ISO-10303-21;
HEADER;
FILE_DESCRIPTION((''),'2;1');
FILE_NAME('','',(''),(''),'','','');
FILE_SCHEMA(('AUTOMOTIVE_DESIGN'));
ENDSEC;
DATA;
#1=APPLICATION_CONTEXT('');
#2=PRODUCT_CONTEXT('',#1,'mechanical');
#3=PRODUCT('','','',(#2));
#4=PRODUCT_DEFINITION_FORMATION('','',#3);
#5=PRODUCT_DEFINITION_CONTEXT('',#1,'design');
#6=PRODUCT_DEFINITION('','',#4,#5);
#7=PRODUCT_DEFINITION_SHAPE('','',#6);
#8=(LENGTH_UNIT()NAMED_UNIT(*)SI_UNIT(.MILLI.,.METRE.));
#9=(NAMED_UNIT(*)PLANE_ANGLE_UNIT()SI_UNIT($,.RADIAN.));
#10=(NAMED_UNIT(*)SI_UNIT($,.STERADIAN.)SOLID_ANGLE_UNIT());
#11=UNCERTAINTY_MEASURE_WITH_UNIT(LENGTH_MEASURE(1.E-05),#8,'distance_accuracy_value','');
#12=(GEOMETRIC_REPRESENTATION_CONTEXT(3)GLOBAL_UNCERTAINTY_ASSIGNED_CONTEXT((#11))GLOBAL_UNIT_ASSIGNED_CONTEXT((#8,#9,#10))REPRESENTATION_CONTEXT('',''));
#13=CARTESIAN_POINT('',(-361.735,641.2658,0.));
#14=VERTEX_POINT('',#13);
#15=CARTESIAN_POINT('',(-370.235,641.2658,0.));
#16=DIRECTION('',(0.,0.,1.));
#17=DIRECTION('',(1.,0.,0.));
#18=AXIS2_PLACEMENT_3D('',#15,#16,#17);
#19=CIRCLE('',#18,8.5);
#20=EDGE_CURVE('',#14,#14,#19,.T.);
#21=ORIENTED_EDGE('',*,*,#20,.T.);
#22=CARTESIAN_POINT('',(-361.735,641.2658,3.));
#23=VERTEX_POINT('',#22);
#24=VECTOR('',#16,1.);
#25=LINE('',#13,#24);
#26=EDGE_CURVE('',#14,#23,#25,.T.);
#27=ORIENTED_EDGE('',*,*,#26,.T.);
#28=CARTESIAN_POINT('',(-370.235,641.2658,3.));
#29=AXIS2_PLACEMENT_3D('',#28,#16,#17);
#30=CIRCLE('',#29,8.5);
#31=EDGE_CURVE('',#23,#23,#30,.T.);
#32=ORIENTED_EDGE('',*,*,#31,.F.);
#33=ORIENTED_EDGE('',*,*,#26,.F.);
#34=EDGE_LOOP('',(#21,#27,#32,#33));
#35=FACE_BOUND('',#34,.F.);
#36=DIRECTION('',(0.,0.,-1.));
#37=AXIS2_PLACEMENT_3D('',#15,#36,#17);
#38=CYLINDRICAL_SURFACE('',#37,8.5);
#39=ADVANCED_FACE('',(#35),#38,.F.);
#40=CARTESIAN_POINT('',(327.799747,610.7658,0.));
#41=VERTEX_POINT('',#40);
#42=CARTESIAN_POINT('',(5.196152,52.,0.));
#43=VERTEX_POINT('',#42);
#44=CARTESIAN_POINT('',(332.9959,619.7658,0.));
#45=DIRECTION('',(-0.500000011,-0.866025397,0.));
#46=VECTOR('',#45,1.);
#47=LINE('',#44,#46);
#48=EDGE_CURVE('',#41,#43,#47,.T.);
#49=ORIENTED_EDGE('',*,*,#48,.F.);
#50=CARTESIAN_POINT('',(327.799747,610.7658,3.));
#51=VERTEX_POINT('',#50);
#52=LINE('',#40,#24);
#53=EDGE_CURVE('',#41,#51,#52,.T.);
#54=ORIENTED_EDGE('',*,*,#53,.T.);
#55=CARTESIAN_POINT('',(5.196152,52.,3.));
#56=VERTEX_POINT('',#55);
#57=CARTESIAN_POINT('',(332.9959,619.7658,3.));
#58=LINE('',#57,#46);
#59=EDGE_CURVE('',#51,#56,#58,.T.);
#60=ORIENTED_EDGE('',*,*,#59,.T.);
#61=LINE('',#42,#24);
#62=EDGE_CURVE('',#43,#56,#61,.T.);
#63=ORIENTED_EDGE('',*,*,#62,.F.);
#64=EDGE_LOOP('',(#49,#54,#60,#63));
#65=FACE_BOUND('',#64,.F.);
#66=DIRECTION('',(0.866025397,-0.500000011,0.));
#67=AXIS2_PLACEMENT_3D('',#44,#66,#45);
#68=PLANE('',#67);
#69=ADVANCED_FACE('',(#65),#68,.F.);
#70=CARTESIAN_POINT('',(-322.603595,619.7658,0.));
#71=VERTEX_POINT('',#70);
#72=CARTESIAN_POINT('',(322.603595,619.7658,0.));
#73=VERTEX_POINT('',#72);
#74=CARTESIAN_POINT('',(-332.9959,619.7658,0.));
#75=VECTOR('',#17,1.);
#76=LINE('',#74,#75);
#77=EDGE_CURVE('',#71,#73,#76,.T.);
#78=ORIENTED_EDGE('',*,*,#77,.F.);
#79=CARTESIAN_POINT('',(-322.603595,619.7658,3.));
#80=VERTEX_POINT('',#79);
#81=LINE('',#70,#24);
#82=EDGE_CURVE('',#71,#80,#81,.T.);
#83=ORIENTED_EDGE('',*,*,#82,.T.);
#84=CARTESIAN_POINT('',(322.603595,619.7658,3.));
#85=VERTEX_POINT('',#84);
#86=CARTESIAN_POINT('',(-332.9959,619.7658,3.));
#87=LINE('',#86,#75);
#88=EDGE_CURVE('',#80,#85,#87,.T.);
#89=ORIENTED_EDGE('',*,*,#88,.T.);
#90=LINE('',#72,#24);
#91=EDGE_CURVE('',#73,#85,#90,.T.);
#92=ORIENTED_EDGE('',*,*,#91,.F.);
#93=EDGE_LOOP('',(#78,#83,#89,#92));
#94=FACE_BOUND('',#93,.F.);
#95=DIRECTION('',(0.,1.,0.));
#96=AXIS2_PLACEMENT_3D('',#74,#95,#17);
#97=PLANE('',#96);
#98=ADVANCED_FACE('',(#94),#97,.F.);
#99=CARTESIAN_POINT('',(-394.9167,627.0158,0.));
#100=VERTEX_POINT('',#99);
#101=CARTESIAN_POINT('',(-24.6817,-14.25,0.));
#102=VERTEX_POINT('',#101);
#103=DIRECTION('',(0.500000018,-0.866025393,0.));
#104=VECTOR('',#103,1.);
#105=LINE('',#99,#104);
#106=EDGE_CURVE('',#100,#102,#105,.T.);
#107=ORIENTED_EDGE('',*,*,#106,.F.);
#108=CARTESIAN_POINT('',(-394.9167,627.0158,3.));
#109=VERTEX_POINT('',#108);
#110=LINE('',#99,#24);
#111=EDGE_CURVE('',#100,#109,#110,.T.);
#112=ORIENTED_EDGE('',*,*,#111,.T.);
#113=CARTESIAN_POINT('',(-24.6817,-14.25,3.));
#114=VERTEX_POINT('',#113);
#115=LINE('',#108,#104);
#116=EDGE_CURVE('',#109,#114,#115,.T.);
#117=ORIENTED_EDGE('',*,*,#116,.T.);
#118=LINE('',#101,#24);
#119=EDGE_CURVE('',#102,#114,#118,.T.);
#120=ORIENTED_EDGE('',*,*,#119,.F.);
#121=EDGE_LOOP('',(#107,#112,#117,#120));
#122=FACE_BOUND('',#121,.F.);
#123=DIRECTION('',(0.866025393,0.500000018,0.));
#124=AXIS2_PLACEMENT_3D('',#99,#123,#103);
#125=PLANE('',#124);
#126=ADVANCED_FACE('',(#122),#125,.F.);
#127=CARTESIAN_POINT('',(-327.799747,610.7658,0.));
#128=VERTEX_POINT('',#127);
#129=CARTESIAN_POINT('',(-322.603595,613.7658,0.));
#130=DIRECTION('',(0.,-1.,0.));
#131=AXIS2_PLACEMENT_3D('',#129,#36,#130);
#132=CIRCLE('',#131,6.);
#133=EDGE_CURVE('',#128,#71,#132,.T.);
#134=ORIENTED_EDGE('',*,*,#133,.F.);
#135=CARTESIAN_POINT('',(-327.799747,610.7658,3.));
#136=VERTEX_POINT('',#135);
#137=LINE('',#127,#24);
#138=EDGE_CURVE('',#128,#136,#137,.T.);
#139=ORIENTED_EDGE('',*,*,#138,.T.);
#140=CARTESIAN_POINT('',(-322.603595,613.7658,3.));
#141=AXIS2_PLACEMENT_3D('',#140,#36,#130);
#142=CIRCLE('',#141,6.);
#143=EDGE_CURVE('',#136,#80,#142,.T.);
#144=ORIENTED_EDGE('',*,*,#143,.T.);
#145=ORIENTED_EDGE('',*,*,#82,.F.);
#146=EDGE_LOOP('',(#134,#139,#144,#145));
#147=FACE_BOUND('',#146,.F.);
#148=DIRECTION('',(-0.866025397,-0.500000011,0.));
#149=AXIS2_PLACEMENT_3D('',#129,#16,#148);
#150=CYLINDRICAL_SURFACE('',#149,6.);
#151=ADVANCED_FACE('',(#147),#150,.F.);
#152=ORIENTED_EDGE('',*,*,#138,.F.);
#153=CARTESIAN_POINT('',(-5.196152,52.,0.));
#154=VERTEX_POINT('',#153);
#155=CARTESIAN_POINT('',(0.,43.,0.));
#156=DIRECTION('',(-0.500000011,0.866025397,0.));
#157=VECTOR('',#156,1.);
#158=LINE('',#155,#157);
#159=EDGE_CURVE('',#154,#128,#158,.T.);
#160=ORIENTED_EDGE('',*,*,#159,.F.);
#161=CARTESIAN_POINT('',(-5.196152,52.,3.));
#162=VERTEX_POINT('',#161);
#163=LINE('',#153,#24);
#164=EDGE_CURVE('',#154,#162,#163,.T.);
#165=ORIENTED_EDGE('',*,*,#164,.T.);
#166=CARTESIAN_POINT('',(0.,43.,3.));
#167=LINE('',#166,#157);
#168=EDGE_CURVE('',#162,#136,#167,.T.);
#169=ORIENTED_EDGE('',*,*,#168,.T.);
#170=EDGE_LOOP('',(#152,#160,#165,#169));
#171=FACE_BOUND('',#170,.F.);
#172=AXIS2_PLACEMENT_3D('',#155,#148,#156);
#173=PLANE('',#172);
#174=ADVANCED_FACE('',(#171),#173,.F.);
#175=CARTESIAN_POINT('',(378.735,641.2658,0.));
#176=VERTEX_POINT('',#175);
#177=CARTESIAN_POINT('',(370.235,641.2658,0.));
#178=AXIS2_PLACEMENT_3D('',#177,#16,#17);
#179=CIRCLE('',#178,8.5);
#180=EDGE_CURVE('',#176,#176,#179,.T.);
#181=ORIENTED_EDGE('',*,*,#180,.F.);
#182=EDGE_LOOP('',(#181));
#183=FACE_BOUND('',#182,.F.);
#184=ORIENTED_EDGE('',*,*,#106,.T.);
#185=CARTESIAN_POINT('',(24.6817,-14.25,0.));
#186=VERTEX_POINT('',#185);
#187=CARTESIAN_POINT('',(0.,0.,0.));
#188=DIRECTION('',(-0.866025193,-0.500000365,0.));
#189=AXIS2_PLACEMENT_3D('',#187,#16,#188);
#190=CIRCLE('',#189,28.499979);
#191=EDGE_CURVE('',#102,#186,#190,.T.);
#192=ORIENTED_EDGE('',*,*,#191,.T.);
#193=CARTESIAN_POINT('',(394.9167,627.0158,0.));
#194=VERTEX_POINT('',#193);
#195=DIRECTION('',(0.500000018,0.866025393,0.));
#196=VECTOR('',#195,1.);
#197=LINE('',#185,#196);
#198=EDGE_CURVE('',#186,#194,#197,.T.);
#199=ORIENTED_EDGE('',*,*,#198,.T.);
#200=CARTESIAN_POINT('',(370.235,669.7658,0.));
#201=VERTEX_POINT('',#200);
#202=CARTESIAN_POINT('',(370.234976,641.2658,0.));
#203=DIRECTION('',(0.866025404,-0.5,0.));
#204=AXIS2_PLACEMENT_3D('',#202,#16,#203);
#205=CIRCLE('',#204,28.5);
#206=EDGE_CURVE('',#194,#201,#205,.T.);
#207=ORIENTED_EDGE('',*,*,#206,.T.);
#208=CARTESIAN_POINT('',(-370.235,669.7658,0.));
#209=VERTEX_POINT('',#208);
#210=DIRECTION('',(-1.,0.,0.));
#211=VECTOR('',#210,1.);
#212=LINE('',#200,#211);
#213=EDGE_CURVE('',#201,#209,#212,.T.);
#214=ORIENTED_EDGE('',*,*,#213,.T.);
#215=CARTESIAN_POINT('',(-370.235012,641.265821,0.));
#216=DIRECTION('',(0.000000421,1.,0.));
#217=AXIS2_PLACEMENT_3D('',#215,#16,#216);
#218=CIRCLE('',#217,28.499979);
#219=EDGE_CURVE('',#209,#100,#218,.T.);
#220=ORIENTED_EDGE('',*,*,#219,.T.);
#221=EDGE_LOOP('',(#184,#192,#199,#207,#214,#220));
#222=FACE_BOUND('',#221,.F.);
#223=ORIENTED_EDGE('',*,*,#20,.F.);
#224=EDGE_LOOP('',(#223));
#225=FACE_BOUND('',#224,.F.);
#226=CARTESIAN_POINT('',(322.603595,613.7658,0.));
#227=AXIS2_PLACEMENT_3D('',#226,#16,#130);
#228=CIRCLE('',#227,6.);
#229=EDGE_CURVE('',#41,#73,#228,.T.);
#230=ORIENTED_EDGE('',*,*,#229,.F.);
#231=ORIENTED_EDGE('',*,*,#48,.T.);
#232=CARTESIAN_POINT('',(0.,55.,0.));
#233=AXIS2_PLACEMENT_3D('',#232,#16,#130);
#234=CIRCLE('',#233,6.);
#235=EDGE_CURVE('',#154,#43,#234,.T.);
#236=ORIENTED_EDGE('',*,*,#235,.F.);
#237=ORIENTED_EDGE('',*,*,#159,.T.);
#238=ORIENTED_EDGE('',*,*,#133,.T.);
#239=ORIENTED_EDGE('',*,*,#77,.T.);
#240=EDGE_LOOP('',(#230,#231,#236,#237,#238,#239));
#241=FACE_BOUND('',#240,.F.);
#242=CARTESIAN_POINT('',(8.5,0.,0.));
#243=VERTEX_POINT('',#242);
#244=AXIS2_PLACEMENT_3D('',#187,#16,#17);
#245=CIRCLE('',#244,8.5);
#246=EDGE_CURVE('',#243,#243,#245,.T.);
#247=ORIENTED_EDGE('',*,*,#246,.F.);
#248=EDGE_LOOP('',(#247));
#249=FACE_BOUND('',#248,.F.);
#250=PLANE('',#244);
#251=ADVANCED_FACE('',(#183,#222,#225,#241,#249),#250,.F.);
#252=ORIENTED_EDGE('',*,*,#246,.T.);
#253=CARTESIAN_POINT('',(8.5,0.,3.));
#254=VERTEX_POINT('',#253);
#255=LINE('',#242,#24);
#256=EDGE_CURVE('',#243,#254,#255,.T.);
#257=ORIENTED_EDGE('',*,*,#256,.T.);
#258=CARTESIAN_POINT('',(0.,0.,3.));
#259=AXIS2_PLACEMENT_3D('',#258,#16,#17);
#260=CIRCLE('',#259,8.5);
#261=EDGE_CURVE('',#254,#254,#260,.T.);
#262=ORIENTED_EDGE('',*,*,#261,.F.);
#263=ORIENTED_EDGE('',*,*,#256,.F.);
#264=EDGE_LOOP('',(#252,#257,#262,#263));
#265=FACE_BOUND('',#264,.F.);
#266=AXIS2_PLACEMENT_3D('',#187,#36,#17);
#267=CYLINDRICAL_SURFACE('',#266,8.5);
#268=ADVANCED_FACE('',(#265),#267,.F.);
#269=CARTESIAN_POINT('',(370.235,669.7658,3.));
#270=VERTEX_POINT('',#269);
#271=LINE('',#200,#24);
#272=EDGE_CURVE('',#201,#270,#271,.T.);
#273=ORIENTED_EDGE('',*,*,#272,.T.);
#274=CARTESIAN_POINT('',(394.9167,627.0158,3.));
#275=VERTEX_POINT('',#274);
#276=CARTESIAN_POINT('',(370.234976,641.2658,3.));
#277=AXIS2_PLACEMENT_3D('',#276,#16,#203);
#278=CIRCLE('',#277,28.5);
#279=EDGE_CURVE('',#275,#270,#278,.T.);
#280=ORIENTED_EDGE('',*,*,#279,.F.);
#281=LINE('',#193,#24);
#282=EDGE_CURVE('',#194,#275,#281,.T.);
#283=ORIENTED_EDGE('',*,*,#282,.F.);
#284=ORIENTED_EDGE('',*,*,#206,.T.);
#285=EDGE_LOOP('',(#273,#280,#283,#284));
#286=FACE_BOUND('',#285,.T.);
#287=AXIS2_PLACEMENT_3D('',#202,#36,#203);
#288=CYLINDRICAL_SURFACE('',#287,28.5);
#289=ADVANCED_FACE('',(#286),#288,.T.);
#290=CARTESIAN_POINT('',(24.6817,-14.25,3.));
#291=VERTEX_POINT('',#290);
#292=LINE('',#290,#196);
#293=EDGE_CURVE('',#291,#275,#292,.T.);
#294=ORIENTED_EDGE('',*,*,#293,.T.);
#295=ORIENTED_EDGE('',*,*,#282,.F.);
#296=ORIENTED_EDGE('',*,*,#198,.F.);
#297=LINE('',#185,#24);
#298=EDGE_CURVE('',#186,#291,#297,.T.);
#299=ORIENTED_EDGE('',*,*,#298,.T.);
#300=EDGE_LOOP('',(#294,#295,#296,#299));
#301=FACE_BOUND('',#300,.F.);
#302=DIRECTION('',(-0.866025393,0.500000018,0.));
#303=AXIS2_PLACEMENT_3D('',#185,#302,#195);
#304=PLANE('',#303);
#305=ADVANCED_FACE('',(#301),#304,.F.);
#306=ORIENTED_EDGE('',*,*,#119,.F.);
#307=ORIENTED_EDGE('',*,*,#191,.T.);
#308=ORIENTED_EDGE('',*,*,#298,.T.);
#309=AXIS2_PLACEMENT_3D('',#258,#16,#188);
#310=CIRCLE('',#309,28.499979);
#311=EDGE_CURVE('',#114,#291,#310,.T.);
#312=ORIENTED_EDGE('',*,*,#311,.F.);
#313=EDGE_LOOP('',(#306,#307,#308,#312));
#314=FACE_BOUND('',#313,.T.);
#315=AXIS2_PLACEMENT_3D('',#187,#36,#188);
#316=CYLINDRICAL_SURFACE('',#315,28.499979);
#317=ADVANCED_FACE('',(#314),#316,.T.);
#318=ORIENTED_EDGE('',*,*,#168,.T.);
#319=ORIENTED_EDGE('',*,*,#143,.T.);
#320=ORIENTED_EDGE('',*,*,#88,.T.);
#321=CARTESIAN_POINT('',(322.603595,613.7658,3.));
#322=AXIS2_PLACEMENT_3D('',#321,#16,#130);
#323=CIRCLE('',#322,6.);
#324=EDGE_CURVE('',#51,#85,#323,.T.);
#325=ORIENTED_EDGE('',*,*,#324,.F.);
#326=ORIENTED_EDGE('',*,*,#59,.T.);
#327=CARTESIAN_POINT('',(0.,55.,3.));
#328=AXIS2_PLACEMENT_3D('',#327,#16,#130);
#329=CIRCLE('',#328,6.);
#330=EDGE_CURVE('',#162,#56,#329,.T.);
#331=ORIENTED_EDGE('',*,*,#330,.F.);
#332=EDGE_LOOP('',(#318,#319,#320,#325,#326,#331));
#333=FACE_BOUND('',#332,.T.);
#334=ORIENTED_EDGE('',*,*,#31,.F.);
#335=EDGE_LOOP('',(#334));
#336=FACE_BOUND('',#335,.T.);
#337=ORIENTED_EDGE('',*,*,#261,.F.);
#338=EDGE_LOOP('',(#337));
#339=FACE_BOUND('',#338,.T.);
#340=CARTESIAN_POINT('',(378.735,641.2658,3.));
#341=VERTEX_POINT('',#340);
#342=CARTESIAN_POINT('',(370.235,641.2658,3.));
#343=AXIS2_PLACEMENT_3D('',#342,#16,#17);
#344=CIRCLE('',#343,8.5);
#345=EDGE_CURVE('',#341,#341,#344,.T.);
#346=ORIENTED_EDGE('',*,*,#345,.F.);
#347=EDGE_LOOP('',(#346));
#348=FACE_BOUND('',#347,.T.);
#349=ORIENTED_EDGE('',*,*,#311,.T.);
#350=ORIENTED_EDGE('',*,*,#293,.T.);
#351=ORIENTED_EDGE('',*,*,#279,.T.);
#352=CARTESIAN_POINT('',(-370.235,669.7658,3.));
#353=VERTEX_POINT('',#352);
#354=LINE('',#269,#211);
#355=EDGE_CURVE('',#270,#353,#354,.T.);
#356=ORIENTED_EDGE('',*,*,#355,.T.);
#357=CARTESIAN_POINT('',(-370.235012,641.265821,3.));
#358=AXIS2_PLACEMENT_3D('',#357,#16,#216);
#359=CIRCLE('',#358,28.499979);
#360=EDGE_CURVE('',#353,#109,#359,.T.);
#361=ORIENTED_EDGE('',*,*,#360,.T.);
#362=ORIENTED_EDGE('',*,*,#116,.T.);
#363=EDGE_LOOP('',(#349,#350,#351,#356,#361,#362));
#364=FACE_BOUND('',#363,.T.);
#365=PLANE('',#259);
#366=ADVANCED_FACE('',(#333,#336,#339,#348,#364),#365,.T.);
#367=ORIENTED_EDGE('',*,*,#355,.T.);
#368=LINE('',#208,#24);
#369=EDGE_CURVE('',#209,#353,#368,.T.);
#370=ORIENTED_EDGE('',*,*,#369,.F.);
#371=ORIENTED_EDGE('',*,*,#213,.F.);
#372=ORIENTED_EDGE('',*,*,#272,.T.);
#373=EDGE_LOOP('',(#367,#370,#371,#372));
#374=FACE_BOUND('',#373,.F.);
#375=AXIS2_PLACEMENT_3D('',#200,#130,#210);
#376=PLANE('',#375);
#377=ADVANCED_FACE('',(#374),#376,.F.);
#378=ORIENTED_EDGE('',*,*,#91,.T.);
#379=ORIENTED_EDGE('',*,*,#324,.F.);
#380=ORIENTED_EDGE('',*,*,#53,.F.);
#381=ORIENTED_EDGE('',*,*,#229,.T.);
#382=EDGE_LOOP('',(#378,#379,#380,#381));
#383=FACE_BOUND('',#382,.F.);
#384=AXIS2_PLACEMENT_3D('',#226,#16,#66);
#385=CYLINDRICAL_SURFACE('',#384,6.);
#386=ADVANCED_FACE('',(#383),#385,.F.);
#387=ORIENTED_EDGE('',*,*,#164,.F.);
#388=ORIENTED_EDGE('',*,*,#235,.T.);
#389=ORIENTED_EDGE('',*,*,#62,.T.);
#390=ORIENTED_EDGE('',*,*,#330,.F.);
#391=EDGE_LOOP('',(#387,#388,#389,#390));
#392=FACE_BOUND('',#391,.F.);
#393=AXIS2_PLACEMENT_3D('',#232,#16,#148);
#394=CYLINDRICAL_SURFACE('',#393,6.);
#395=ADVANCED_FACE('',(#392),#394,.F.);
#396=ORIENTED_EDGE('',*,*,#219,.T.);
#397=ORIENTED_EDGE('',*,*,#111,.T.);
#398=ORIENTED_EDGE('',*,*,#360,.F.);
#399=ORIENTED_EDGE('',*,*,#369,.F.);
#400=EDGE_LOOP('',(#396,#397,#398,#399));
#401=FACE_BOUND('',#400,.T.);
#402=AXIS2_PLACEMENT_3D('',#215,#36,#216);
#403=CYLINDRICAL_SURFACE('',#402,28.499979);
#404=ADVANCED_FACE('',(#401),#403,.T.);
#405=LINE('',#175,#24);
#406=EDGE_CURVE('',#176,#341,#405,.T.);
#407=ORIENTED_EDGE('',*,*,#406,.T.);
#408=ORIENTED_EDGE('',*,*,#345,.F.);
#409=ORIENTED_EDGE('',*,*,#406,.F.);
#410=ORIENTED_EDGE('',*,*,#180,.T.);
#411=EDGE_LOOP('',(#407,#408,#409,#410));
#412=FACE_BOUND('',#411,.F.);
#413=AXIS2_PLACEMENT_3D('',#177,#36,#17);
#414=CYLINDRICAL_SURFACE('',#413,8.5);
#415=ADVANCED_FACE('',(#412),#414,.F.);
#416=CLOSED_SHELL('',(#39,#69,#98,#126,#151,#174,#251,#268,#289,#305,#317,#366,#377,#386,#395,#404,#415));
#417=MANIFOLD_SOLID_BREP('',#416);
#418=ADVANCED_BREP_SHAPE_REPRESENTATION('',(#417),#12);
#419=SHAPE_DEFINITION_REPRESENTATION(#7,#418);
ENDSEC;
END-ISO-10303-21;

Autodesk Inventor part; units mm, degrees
ref_plane "YZ Plane" through (0, 0, 0) normal (1, 0, 0) x (0, 1, 0)
ref_plane "XZ Plane" through (0, 0, 0) normal (0, 1, 0) x (-1, 0, 0)
ref_plane "XY Plane" through (0, 0, 0) normal (0, 0, 1) x (1, 0, 0)
sketch "Sketch1" plane through (0, 0, 0) normal (0, 0, 1) x (1, 0, 0)
  circle A0 centre (0, 0) radius 8.5
  line L0 (-394.9167, 627.0158) -> (-24.6817, -14.25)
  arc A1 (-24.6817, -14.25) -> (24.6817, -14.25) centre (0, 0) ccw
  line L1 (24.6817, -14.25) -> (394.9167, 627.0158)
  arc A2 (394.9167, 627.0158) -> (370.235, 669.7658) centre (370.235, 641.2658) ccw
  line L2 (370.235, 669.7658) -> (-370.235, 669.7658)
  arc A3 (-370.235, 669.7658) -> (-394.9167, 627.0158) centre (-370.235, 641.2658) ccw
  line L3 (0, 0) -> (0, 669.7658) construction
  line L4 (-332.9959, 619.7658) -> (332.9959, 619.7658)
  line L5 (332.9959, 619.7658) -> (0, 43)
  line L6 (0, 43) -> (-332.9959, 619.7658)
  circle A4 centre (-370.235, 641.2658) radius 8.5
  circle A5 centre (370.235, 641.2658) radius 8.5
  dimension "d34" = 17
  dimension "d35" = 20
  dimension "d36" = 740.47
  dimension "d37" = 740.47
  dimension "d38" = 50
extrude "Plate1" add sketch "Sketch1" along normal blind 3
fillet "Corner Round3" radius 6 3 edges at (-332.9959, 619.7658, 1.5) (0, 43, 1.5) (332.9959, 619.7658, 1.5)
equation "\"d37\" = d36"
equation "\"d2\" = Thickness"
equation "\"BendReliefWidth\" = Thickness"
equation "\"BendReliefDepth\" = 0.5 * Thickness"
equation "\"CornerReliefSize\" = 4 * Thickness"
equation "\"MinimumRemnant\" = 2 * Thickness"
equation "\"TransitionRadius\" = BendRadius"
equation "\"JacobiRadiusSize\" = BendRadius"
equation "\"GapSize\" = Thickness"
equation "\"Thickness\" = 3"
equation "\"BendRadius\" = 5"
properties part number "SLM 1696 leg floor pattern" material "Stainless Steel"
